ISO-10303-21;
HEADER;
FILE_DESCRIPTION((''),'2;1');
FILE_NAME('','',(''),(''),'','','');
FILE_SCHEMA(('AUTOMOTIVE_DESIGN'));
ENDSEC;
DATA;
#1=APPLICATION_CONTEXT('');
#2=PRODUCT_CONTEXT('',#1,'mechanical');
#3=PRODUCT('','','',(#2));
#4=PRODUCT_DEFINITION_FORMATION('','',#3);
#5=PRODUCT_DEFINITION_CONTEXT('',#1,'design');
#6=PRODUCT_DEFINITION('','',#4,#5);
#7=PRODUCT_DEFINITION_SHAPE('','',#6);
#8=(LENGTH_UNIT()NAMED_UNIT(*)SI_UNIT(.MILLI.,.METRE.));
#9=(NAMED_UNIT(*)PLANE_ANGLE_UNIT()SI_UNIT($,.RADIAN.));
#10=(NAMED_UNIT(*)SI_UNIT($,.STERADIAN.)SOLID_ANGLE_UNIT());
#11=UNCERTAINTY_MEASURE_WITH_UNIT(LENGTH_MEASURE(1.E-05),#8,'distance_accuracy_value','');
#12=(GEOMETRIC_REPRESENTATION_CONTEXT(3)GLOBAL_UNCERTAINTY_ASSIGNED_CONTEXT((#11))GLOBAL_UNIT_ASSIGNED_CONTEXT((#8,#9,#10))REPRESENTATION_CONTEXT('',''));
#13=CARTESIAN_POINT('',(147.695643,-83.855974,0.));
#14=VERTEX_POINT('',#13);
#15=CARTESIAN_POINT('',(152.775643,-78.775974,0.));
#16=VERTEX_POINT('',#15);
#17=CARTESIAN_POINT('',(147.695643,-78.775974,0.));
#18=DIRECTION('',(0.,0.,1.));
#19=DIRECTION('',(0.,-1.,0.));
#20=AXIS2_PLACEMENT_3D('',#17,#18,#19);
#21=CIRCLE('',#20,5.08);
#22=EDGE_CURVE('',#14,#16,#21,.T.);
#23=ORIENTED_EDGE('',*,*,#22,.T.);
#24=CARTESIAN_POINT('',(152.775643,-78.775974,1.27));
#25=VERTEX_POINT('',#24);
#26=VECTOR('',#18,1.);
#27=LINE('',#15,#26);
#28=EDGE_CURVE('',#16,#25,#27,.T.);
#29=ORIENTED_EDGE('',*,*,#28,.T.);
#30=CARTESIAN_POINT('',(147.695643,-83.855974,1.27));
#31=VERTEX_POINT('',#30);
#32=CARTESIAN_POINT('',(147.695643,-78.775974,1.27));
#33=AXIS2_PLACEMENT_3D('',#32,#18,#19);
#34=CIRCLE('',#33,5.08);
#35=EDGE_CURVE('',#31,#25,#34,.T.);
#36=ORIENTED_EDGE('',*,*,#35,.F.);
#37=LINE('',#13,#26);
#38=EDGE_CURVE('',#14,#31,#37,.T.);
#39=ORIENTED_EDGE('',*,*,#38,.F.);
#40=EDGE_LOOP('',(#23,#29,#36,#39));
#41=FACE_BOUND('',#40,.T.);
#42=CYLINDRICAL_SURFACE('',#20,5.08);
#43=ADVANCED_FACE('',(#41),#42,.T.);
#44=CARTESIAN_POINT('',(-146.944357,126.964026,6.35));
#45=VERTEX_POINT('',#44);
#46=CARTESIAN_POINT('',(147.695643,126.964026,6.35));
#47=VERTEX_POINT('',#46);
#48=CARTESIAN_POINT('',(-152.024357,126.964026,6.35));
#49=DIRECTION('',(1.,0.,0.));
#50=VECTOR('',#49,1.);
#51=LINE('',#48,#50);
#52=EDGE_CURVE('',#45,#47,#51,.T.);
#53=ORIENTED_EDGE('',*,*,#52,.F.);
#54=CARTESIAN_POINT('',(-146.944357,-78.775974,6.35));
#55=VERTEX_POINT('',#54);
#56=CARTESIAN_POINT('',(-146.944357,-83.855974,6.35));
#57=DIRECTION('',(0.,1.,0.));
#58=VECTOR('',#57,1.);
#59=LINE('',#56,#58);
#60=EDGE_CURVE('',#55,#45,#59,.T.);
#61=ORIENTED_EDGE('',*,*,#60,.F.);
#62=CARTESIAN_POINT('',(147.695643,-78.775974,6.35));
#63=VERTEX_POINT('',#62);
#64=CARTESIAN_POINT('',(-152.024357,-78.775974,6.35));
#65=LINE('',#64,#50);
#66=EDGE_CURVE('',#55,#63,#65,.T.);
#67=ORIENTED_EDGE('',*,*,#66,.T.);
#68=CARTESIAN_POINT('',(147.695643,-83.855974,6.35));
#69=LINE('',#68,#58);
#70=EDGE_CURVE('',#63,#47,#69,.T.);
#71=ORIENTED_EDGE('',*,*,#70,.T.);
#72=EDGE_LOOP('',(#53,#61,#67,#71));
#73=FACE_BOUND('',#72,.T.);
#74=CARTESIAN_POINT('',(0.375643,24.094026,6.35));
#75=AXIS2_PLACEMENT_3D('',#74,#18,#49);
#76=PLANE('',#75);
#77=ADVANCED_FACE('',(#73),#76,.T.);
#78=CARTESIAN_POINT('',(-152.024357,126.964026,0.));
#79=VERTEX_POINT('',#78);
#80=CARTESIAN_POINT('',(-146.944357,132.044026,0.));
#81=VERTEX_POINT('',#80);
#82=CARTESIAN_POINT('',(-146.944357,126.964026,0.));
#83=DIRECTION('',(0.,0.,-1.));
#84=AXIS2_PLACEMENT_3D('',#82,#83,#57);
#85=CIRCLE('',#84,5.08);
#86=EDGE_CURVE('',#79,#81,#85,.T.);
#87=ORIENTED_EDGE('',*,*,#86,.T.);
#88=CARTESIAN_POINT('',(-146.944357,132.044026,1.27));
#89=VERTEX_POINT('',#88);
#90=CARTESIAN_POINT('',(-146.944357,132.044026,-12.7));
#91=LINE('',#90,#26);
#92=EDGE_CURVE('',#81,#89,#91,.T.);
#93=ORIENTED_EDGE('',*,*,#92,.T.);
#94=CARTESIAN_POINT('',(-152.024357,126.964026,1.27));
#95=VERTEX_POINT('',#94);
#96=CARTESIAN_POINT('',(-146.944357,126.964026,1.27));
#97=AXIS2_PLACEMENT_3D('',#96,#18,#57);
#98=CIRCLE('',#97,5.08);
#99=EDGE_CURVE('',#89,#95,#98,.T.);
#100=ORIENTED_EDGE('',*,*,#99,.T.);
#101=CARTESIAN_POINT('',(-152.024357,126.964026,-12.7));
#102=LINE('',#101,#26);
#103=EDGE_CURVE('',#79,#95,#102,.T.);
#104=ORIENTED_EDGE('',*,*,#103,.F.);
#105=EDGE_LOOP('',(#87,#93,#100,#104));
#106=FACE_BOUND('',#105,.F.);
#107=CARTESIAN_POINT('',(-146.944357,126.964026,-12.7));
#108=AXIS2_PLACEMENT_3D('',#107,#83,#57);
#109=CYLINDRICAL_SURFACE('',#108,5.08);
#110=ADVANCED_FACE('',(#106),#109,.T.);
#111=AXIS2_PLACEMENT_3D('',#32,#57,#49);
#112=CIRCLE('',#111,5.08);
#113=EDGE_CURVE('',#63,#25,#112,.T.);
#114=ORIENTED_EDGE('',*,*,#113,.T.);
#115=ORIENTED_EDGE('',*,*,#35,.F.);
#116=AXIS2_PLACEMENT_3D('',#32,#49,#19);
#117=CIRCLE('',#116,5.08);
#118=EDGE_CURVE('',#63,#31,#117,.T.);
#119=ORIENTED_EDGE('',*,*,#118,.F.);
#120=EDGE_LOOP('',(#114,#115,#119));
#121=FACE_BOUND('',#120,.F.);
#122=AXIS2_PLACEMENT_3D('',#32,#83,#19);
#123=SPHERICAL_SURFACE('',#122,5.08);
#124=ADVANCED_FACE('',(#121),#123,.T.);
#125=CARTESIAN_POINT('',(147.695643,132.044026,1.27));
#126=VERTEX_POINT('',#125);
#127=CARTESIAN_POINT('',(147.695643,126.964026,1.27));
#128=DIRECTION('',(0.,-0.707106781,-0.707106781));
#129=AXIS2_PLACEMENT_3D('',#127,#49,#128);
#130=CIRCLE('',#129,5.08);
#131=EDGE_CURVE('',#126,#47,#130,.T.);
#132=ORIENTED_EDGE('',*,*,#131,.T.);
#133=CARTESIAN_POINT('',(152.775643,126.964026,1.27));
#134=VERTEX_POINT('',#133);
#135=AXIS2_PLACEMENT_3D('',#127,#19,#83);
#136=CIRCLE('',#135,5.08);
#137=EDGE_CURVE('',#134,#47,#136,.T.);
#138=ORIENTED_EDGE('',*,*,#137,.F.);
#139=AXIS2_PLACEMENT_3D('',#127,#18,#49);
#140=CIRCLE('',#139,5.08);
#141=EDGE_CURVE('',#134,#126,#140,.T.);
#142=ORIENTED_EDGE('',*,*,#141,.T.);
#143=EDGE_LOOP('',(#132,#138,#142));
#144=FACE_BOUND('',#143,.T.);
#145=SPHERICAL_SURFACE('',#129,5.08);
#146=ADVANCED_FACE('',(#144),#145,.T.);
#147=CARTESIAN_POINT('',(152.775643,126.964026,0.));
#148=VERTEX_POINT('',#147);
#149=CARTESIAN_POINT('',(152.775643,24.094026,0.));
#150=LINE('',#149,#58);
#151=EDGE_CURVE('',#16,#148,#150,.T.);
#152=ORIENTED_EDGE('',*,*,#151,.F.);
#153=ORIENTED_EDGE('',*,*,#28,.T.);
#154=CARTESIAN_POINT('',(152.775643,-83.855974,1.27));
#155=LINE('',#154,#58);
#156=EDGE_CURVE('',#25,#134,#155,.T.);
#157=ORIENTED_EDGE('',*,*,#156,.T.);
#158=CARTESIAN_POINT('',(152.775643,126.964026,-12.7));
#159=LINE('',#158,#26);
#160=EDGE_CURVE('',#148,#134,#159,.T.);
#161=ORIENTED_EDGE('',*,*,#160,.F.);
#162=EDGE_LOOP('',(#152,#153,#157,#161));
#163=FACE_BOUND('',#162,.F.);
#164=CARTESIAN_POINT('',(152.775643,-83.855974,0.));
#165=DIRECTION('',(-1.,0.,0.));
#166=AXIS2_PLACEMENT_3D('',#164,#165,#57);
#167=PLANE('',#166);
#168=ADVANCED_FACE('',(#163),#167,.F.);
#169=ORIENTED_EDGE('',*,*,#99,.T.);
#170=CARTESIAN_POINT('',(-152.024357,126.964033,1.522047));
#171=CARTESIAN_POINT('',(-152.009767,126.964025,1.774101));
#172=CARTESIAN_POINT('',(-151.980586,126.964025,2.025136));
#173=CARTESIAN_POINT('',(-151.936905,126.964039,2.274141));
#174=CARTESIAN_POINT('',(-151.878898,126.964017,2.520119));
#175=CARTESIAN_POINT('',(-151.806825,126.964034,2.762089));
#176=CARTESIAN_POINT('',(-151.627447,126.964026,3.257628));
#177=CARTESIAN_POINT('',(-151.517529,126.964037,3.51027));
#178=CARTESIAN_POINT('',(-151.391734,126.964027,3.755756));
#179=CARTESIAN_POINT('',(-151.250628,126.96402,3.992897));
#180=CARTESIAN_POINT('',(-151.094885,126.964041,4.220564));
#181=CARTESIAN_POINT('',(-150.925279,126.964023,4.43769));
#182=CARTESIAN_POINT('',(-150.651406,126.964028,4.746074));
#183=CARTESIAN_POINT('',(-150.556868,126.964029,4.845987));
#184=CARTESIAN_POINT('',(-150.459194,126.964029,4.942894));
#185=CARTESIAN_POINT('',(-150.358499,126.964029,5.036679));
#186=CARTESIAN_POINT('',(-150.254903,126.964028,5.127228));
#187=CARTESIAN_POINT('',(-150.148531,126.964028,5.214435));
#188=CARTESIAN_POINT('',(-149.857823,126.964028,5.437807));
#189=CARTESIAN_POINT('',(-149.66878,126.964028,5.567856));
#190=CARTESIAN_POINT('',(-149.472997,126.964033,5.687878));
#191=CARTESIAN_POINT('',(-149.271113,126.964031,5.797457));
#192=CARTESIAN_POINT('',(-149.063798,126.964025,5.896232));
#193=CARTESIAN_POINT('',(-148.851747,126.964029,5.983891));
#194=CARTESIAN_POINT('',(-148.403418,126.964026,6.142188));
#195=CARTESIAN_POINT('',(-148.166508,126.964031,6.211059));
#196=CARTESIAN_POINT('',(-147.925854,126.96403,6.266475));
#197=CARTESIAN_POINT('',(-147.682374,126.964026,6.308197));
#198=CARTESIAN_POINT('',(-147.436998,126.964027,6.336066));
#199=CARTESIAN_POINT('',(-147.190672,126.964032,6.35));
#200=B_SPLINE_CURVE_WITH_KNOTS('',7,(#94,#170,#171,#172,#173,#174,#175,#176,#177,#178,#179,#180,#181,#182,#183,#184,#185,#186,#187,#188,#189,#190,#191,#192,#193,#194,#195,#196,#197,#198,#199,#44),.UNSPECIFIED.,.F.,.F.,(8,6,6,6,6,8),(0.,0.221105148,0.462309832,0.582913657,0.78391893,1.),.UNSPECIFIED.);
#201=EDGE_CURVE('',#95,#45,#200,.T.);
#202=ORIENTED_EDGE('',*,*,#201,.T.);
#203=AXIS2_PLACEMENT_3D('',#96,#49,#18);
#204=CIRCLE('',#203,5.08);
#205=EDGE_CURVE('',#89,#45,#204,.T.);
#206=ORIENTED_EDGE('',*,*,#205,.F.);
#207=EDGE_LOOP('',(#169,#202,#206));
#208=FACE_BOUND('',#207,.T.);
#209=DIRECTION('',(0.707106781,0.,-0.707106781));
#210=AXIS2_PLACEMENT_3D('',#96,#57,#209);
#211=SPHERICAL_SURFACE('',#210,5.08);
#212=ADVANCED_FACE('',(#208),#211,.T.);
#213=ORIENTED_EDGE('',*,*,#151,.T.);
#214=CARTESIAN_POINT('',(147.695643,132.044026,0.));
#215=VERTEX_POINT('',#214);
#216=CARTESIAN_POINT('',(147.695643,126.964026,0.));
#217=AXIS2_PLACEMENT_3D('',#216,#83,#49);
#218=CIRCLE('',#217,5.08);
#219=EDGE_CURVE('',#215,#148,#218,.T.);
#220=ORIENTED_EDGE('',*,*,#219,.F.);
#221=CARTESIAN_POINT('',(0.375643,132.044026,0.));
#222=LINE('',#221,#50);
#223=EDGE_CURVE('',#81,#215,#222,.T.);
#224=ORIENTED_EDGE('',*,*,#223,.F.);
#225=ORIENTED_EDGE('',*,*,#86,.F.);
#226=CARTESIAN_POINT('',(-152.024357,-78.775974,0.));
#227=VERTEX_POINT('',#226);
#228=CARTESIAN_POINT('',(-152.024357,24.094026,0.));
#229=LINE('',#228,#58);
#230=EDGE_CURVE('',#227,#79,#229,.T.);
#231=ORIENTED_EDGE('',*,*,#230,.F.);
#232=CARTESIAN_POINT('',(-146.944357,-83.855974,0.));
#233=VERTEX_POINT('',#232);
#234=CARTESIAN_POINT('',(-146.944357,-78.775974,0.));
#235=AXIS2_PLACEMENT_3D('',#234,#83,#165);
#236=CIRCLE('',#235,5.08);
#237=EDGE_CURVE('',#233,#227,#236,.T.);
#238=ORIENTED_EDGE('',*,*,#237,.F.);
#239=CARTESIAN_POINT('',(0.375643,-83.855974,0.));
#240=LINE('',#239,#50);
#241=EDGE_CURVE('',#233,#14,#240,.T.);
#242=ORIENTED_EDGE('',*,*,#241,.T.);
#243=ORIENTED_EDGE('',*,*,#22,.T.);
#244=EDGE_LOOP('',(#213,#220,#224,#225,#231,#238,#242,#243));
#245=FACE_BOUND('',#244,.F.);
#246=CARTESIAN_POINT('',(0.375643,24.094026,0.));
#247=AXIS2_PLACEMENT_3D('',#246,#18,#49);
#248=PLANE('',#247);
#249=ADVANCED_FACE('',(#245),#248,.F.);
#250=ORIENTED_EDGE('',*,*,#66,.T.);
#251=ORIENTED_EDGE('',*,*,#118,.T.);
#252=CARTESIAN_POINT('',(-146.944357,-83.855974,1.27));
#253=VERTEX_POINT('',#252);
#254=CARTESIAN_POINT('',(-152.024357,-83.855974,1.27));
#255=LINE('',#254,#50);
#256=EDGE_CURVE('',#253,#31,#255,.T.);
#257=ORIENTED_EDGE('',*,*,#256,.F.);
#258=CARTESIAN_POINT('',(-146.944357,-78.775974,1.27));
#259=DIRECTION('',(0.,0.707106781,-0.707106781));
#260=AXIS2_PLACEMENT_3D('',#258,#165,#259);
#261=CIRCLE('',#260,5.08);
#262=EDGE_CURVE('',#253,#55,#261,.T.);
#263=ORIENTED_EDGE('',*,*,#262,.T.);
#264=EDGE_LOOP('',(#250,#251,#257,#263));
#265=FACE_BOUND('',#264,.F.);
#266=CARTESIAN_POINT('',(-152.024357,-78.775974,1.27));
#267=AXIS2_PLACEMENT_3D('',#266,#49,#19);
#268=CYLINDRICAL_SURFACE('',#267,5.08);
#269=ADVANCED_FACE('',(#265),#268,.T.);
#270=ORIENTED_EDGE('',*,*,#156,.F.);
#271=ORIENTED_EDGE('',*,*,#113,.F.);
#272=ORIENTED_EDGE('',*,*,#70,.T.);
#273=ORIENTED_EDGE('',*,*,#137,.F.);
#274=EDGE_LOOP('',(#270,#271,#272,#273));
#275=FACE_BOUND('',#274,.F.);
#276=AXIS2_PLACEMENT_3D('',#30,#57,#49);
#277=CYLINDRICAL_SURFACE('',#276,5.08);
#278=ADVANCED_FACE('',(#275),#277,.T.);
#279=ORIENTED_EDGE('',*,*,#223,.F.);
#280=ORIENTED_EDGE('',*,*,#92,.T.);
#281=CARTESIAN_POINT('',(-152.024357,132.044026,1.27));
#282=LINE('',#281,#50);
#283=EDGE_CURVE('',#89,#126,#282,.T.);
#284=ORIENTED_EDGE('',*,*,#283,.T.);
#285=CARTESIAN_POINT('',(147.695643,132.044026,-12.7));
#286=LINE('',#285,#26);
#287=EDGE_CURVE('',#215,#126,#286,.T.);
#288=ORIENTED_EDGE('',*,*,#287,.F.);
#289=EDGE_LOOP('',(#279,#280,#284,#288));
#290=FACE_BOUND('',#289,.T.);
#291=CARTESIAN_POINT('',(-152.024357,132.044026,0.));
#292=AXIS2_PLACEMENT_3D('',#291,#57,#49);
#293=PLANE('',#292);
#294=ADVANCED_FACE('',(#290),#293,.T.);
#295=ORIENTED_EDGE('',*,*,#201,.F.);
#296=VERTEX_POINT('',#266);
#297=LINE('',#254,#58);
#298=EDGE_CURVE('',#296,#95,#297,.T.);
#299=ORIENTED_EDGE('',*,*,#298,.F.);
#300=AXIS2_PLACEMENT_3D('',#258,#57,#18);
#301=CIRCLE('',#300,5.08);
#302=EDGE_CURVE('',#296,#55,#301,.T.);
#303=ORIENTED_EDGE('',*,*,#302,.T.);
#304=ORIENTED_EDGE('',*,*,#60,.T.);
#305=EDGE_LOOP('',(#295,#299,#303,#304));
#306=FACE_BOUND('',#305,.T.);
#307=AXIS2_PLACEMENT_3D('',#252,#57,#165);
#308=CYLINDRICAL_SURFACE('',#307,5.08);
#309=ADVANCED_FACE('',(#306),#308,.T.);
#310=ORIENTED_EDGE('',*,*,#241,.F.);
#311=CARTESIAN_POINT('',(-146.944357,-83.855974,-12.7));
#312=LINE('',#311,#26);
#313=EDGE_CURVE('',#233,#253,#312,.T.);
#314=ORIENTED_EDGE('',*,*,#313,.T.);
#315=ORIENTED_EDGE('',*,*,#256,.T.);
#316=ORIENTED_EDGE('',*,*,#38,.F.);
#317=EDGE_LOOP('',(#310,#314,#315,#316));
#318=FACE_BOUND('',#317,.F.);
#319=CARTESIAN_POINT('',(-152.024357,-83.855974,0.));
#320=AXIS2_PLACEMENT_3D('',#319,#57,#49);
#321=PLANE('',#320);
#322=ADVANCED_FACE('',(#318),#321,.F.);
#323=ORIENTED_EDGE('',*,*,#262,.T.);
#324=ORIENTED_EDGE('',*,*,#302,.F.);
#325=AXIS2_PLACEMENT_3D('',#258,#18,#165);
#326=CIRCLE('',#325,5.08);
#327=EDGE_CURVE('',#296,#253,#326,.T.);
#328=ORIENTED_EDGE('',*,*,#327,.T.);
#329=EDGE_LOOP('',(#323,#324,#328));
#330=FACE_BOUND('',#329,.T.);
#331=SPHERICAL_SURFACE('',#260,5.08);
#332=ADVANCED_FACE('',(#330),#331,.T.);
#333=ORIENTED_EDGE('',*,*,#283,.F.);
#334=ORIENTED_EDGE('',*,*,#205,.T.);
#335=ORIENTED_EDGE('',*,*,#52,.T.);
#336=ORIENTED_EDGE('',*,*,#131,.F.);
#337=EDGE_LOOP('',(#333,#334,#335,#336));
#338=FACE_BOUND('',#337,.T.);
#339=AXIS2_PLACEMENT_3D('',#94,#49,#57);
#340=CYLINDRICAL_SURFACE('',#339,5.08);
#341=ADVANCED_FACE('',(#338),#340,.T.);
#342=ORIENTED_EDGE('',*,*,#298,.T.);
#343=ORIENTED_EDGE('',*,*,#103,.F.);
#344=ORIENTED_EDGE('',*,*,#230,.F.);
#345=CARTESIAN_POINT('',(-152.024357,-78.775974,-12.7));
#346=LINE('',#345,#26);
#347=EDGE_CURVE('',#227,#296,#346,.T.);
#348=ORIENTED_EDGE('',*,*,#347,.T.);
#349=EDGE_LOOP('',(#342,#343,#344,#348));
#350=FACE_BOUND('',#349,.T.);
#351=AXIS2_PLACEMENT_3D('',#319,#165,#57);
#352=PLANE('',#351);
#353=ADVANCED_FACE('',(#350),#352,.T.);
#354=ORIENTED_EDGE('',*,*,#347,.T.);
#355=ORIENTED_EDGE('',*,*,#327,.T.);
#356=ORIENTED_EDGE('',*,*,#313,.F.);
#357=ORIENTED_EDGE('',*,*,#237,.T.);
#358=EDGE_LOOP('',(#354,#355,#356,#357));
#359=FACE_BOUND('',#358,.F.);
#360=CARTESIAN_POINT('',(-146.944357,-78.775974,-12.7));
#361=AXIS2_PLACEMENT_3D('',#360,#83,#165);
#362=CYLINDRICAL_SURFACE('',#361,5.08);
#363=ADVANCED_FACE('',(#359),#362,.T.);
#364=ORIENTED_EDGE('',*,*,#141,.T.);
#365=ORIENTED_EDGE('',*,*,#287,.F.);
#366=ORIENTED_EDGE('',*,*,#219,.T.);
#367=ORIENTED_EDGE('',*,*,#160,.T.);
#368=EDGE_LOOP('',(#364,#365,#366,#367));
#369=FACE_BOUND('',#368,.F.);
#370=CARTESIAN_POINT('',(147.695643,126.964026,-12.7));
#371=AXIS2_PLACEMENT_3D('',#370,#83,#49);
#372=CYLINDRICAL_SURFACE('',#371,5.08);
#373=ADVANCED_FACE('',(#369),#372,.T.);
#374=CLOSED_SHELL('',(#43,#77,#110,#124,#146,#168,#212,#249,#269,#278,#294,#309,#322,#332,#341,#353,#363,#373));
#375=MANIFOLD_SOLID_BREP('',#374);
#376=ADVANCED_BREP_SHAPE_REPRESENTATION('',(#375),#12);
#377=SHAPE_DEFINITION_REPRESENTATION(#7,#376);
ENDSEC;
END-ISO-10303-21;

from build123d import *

# Parameters (mm, degrees)
F0_W         = 304.8
F0_H         = 215.9
F1_DEPTH     = 6.35
F2_R         = 5.08
F3_T1_DEPTH  = 13.97
F3_S5_W      = 5.08
F3_S5_H      = 5.08
F3_T6_DEPTH  = 5.08
F3_S11_W     = 5.08
F3_S11_H     = 5.08
F3_T12_DEPTH = 5.08
F3_S17_W     = 5.08
F3_S17_H     = 5.08
F3_T18_DEPTH = 5.08


# Not quite as in the source:
# - a fillet or chamfer that OpenCascade refuses, or shapes differently, is made with other operations: its cross-section is extruded or revolved along the edge and cut away or added


with BuildPart() as f1:
    # F0 (on Top) → F1 (new body)
    with BuildSketch(Plane.XY):
        with Locations((0.3756433725, 24.0940256725)):
            Rectangle(F0_W, F0_H)
    extrude(amount=F1_DEPTH)

    # F2
    f2_edges = [f1.edges().sort_by_distance(p)[0] for p in [
        (152.775643, -83.855974, 3.175),
        (0.375643, -83.855974, 6.35),
        (-152.024357, 24.094026, 6.35),
        (0.375643, 132.044026, 6.35),
        (152.775643, 24.094026, 6.35),
    ]]
    fillet(f2_edges, radius=F2_R)

    # F3: fillet of radius 5.08 on 3 edges, made by hand

    # F3_s2 → F3_t1 (cut)
    with BuildSketch(Plane.XY.offset(-12.7)):
        with BuildLine():
            ThreePointArc((-152.0243566275, -78.7759743275), (-150.5364590759, -82.3680767759), (-146.9443566275, -83.8559743275))
            Line((-146.9443566275, -83.8559743275), (-152.0243566275, -83.8559743275))
            Line((-152.0243566275, -83.8559743275), (-152.0243566275, -78.7759743275))
        make_face()
        with BuildLine():
            ThreePointArc((-146.9443566275, 132.0440256725), (-150.5364590759, 130.556128121), (-152.0243566275, 126.9640256725))
            Line((-152.0243566275, 126.9640256725), (-152.0243566275, 132.0440256725))
            Line((-152.0243566275, 132.0440256725), (-146.9443566275, 132.0440256725))
        make_face()
        with BuildLine():
            ThreePointArc((152.7756433725, 126.9640256725), (151.287745821, 130.556128121), (147.6956433725, 132.0440256725))
            Line((147.6956433725, 132.0440256725), (152.7756433725, 132.0440256725))
            Line((152.7756433725, 132.0440256725), (152.7756433725, 126.9640256725))
        make_face()
    extrude(amount=F3_T1_DEPTH, mode=Mode.SUBTRACT)


with BuildPart() as f3_tool4:
    # F3_s5 → F3_t6 (new body)
    with BuildSketch(Plane.YZ.offset(147.6956433725)):
        with Locations((129.5040256725, 3.81)):
            Rectangle(F3_S5_W, F3_S5_H)
    extrude(amount=F3_T6_DEPTH)

    # F3_s7 → F3_t8 (revolve, cut)
    with BuildSketch(Plane(origin=(147.6956433725, 126.9640256725, 1.27), x_dir=(0, -0.7071067812, -0.7071067812), z_dir=(0, -0.7071067812, 0.7071067812))):
        with BuildLine():
            ThreePointArc((0, -5.08), (5.08, 0), (0, 5.08))
            Line((0, 5.08), (0, -5.08))
        make_face()
    revolve(axis=Axis((147.6956433725, 126.9640256725, 1.27), (1, 0, 0)), mode=Mode.SUBTRACT)


with BuildPart() as f1_1:
    add(f1.part)

    # F3_t3: cut F3_tool4
    add(f3_tool4.part, mode=Mode.SUBTRACT)


with BuildPart() as f3_tool10:
    # F3_s11 → F3_t12 (new body)
    with BuildSketch(Plane.XZ.offset(-126.9640256725)):
        with Locations((-149.4843566275, 3.81)):
            Rectangle(F3_S11_W, F3_S11_H)
    extrude(amount=-F3_T12_DEPTH)

    # F3_s13 → F3_t14 (revolve, cut)
    with BuildSketch(Plane(origin=(-146.9443566275, 126.9640256725, 1.27), x_dir=(0.7071067812, 0, -0.7071067812), z_dir=(0.7071067812, 0, 0.7071067812))):
        with BuildLine():
            ThreePointArc((0, -5.08), (5.08, 0), (0, 5.08))
            Line((0, 5.08), (0, -5.08))
        make_face()
    revolve(axis=Axis((-146.9443566275, 126.9640256725, 1.27), (0, 1, 0)), mode=Mode.SUBTRACT)


with BuildPart() as f1_2:
    add(f1_1.part)

    # F3_t9: cut F3_tool10
    add(f3_tool10.part, mode=Mode.SUBTRACT)


with BuildPart() as f3_tool16:
    # F3_s17 → F3_t18 (new body)
    with BuildSketch(Plane.YZ.offset(-146.9443566275)):
        with Locations((-81.3159743275, 3.81)):
            Rectangle(F3_S17_W, F3_S17_H)
    extrude(amount=-F3_T18_DEPTH)

    # F3_s19 → F3_t20 (revolve, cut)
    with BuildSketch(Plane(origin=(-146.9443566275, -78.7759743275, 1.27), x_dir=(0, 0.7071067812, -0.7071067812), z_dir=(0, 0.7071067812, 0.7071067812))):
        with BuildLine():
            ThreePointArc((0, -5.08), (5.08, 0), (0, 5.08))
            Line((0, 5.08), (0, -5.08))
        make_face()
    revolve(axis=Axis((-146.9443566275, -78.7759743275, 1.27), (-1, 0, 0)), mode=Mode.SUBTRACT)


with BuildPart() as f1_3:
    add(f1_2.part)

    # F3_t15: cut F3_tool16
    add(f3_tool16.part, mode=Mode.SUBTRACT)


solid = f1_3.part
